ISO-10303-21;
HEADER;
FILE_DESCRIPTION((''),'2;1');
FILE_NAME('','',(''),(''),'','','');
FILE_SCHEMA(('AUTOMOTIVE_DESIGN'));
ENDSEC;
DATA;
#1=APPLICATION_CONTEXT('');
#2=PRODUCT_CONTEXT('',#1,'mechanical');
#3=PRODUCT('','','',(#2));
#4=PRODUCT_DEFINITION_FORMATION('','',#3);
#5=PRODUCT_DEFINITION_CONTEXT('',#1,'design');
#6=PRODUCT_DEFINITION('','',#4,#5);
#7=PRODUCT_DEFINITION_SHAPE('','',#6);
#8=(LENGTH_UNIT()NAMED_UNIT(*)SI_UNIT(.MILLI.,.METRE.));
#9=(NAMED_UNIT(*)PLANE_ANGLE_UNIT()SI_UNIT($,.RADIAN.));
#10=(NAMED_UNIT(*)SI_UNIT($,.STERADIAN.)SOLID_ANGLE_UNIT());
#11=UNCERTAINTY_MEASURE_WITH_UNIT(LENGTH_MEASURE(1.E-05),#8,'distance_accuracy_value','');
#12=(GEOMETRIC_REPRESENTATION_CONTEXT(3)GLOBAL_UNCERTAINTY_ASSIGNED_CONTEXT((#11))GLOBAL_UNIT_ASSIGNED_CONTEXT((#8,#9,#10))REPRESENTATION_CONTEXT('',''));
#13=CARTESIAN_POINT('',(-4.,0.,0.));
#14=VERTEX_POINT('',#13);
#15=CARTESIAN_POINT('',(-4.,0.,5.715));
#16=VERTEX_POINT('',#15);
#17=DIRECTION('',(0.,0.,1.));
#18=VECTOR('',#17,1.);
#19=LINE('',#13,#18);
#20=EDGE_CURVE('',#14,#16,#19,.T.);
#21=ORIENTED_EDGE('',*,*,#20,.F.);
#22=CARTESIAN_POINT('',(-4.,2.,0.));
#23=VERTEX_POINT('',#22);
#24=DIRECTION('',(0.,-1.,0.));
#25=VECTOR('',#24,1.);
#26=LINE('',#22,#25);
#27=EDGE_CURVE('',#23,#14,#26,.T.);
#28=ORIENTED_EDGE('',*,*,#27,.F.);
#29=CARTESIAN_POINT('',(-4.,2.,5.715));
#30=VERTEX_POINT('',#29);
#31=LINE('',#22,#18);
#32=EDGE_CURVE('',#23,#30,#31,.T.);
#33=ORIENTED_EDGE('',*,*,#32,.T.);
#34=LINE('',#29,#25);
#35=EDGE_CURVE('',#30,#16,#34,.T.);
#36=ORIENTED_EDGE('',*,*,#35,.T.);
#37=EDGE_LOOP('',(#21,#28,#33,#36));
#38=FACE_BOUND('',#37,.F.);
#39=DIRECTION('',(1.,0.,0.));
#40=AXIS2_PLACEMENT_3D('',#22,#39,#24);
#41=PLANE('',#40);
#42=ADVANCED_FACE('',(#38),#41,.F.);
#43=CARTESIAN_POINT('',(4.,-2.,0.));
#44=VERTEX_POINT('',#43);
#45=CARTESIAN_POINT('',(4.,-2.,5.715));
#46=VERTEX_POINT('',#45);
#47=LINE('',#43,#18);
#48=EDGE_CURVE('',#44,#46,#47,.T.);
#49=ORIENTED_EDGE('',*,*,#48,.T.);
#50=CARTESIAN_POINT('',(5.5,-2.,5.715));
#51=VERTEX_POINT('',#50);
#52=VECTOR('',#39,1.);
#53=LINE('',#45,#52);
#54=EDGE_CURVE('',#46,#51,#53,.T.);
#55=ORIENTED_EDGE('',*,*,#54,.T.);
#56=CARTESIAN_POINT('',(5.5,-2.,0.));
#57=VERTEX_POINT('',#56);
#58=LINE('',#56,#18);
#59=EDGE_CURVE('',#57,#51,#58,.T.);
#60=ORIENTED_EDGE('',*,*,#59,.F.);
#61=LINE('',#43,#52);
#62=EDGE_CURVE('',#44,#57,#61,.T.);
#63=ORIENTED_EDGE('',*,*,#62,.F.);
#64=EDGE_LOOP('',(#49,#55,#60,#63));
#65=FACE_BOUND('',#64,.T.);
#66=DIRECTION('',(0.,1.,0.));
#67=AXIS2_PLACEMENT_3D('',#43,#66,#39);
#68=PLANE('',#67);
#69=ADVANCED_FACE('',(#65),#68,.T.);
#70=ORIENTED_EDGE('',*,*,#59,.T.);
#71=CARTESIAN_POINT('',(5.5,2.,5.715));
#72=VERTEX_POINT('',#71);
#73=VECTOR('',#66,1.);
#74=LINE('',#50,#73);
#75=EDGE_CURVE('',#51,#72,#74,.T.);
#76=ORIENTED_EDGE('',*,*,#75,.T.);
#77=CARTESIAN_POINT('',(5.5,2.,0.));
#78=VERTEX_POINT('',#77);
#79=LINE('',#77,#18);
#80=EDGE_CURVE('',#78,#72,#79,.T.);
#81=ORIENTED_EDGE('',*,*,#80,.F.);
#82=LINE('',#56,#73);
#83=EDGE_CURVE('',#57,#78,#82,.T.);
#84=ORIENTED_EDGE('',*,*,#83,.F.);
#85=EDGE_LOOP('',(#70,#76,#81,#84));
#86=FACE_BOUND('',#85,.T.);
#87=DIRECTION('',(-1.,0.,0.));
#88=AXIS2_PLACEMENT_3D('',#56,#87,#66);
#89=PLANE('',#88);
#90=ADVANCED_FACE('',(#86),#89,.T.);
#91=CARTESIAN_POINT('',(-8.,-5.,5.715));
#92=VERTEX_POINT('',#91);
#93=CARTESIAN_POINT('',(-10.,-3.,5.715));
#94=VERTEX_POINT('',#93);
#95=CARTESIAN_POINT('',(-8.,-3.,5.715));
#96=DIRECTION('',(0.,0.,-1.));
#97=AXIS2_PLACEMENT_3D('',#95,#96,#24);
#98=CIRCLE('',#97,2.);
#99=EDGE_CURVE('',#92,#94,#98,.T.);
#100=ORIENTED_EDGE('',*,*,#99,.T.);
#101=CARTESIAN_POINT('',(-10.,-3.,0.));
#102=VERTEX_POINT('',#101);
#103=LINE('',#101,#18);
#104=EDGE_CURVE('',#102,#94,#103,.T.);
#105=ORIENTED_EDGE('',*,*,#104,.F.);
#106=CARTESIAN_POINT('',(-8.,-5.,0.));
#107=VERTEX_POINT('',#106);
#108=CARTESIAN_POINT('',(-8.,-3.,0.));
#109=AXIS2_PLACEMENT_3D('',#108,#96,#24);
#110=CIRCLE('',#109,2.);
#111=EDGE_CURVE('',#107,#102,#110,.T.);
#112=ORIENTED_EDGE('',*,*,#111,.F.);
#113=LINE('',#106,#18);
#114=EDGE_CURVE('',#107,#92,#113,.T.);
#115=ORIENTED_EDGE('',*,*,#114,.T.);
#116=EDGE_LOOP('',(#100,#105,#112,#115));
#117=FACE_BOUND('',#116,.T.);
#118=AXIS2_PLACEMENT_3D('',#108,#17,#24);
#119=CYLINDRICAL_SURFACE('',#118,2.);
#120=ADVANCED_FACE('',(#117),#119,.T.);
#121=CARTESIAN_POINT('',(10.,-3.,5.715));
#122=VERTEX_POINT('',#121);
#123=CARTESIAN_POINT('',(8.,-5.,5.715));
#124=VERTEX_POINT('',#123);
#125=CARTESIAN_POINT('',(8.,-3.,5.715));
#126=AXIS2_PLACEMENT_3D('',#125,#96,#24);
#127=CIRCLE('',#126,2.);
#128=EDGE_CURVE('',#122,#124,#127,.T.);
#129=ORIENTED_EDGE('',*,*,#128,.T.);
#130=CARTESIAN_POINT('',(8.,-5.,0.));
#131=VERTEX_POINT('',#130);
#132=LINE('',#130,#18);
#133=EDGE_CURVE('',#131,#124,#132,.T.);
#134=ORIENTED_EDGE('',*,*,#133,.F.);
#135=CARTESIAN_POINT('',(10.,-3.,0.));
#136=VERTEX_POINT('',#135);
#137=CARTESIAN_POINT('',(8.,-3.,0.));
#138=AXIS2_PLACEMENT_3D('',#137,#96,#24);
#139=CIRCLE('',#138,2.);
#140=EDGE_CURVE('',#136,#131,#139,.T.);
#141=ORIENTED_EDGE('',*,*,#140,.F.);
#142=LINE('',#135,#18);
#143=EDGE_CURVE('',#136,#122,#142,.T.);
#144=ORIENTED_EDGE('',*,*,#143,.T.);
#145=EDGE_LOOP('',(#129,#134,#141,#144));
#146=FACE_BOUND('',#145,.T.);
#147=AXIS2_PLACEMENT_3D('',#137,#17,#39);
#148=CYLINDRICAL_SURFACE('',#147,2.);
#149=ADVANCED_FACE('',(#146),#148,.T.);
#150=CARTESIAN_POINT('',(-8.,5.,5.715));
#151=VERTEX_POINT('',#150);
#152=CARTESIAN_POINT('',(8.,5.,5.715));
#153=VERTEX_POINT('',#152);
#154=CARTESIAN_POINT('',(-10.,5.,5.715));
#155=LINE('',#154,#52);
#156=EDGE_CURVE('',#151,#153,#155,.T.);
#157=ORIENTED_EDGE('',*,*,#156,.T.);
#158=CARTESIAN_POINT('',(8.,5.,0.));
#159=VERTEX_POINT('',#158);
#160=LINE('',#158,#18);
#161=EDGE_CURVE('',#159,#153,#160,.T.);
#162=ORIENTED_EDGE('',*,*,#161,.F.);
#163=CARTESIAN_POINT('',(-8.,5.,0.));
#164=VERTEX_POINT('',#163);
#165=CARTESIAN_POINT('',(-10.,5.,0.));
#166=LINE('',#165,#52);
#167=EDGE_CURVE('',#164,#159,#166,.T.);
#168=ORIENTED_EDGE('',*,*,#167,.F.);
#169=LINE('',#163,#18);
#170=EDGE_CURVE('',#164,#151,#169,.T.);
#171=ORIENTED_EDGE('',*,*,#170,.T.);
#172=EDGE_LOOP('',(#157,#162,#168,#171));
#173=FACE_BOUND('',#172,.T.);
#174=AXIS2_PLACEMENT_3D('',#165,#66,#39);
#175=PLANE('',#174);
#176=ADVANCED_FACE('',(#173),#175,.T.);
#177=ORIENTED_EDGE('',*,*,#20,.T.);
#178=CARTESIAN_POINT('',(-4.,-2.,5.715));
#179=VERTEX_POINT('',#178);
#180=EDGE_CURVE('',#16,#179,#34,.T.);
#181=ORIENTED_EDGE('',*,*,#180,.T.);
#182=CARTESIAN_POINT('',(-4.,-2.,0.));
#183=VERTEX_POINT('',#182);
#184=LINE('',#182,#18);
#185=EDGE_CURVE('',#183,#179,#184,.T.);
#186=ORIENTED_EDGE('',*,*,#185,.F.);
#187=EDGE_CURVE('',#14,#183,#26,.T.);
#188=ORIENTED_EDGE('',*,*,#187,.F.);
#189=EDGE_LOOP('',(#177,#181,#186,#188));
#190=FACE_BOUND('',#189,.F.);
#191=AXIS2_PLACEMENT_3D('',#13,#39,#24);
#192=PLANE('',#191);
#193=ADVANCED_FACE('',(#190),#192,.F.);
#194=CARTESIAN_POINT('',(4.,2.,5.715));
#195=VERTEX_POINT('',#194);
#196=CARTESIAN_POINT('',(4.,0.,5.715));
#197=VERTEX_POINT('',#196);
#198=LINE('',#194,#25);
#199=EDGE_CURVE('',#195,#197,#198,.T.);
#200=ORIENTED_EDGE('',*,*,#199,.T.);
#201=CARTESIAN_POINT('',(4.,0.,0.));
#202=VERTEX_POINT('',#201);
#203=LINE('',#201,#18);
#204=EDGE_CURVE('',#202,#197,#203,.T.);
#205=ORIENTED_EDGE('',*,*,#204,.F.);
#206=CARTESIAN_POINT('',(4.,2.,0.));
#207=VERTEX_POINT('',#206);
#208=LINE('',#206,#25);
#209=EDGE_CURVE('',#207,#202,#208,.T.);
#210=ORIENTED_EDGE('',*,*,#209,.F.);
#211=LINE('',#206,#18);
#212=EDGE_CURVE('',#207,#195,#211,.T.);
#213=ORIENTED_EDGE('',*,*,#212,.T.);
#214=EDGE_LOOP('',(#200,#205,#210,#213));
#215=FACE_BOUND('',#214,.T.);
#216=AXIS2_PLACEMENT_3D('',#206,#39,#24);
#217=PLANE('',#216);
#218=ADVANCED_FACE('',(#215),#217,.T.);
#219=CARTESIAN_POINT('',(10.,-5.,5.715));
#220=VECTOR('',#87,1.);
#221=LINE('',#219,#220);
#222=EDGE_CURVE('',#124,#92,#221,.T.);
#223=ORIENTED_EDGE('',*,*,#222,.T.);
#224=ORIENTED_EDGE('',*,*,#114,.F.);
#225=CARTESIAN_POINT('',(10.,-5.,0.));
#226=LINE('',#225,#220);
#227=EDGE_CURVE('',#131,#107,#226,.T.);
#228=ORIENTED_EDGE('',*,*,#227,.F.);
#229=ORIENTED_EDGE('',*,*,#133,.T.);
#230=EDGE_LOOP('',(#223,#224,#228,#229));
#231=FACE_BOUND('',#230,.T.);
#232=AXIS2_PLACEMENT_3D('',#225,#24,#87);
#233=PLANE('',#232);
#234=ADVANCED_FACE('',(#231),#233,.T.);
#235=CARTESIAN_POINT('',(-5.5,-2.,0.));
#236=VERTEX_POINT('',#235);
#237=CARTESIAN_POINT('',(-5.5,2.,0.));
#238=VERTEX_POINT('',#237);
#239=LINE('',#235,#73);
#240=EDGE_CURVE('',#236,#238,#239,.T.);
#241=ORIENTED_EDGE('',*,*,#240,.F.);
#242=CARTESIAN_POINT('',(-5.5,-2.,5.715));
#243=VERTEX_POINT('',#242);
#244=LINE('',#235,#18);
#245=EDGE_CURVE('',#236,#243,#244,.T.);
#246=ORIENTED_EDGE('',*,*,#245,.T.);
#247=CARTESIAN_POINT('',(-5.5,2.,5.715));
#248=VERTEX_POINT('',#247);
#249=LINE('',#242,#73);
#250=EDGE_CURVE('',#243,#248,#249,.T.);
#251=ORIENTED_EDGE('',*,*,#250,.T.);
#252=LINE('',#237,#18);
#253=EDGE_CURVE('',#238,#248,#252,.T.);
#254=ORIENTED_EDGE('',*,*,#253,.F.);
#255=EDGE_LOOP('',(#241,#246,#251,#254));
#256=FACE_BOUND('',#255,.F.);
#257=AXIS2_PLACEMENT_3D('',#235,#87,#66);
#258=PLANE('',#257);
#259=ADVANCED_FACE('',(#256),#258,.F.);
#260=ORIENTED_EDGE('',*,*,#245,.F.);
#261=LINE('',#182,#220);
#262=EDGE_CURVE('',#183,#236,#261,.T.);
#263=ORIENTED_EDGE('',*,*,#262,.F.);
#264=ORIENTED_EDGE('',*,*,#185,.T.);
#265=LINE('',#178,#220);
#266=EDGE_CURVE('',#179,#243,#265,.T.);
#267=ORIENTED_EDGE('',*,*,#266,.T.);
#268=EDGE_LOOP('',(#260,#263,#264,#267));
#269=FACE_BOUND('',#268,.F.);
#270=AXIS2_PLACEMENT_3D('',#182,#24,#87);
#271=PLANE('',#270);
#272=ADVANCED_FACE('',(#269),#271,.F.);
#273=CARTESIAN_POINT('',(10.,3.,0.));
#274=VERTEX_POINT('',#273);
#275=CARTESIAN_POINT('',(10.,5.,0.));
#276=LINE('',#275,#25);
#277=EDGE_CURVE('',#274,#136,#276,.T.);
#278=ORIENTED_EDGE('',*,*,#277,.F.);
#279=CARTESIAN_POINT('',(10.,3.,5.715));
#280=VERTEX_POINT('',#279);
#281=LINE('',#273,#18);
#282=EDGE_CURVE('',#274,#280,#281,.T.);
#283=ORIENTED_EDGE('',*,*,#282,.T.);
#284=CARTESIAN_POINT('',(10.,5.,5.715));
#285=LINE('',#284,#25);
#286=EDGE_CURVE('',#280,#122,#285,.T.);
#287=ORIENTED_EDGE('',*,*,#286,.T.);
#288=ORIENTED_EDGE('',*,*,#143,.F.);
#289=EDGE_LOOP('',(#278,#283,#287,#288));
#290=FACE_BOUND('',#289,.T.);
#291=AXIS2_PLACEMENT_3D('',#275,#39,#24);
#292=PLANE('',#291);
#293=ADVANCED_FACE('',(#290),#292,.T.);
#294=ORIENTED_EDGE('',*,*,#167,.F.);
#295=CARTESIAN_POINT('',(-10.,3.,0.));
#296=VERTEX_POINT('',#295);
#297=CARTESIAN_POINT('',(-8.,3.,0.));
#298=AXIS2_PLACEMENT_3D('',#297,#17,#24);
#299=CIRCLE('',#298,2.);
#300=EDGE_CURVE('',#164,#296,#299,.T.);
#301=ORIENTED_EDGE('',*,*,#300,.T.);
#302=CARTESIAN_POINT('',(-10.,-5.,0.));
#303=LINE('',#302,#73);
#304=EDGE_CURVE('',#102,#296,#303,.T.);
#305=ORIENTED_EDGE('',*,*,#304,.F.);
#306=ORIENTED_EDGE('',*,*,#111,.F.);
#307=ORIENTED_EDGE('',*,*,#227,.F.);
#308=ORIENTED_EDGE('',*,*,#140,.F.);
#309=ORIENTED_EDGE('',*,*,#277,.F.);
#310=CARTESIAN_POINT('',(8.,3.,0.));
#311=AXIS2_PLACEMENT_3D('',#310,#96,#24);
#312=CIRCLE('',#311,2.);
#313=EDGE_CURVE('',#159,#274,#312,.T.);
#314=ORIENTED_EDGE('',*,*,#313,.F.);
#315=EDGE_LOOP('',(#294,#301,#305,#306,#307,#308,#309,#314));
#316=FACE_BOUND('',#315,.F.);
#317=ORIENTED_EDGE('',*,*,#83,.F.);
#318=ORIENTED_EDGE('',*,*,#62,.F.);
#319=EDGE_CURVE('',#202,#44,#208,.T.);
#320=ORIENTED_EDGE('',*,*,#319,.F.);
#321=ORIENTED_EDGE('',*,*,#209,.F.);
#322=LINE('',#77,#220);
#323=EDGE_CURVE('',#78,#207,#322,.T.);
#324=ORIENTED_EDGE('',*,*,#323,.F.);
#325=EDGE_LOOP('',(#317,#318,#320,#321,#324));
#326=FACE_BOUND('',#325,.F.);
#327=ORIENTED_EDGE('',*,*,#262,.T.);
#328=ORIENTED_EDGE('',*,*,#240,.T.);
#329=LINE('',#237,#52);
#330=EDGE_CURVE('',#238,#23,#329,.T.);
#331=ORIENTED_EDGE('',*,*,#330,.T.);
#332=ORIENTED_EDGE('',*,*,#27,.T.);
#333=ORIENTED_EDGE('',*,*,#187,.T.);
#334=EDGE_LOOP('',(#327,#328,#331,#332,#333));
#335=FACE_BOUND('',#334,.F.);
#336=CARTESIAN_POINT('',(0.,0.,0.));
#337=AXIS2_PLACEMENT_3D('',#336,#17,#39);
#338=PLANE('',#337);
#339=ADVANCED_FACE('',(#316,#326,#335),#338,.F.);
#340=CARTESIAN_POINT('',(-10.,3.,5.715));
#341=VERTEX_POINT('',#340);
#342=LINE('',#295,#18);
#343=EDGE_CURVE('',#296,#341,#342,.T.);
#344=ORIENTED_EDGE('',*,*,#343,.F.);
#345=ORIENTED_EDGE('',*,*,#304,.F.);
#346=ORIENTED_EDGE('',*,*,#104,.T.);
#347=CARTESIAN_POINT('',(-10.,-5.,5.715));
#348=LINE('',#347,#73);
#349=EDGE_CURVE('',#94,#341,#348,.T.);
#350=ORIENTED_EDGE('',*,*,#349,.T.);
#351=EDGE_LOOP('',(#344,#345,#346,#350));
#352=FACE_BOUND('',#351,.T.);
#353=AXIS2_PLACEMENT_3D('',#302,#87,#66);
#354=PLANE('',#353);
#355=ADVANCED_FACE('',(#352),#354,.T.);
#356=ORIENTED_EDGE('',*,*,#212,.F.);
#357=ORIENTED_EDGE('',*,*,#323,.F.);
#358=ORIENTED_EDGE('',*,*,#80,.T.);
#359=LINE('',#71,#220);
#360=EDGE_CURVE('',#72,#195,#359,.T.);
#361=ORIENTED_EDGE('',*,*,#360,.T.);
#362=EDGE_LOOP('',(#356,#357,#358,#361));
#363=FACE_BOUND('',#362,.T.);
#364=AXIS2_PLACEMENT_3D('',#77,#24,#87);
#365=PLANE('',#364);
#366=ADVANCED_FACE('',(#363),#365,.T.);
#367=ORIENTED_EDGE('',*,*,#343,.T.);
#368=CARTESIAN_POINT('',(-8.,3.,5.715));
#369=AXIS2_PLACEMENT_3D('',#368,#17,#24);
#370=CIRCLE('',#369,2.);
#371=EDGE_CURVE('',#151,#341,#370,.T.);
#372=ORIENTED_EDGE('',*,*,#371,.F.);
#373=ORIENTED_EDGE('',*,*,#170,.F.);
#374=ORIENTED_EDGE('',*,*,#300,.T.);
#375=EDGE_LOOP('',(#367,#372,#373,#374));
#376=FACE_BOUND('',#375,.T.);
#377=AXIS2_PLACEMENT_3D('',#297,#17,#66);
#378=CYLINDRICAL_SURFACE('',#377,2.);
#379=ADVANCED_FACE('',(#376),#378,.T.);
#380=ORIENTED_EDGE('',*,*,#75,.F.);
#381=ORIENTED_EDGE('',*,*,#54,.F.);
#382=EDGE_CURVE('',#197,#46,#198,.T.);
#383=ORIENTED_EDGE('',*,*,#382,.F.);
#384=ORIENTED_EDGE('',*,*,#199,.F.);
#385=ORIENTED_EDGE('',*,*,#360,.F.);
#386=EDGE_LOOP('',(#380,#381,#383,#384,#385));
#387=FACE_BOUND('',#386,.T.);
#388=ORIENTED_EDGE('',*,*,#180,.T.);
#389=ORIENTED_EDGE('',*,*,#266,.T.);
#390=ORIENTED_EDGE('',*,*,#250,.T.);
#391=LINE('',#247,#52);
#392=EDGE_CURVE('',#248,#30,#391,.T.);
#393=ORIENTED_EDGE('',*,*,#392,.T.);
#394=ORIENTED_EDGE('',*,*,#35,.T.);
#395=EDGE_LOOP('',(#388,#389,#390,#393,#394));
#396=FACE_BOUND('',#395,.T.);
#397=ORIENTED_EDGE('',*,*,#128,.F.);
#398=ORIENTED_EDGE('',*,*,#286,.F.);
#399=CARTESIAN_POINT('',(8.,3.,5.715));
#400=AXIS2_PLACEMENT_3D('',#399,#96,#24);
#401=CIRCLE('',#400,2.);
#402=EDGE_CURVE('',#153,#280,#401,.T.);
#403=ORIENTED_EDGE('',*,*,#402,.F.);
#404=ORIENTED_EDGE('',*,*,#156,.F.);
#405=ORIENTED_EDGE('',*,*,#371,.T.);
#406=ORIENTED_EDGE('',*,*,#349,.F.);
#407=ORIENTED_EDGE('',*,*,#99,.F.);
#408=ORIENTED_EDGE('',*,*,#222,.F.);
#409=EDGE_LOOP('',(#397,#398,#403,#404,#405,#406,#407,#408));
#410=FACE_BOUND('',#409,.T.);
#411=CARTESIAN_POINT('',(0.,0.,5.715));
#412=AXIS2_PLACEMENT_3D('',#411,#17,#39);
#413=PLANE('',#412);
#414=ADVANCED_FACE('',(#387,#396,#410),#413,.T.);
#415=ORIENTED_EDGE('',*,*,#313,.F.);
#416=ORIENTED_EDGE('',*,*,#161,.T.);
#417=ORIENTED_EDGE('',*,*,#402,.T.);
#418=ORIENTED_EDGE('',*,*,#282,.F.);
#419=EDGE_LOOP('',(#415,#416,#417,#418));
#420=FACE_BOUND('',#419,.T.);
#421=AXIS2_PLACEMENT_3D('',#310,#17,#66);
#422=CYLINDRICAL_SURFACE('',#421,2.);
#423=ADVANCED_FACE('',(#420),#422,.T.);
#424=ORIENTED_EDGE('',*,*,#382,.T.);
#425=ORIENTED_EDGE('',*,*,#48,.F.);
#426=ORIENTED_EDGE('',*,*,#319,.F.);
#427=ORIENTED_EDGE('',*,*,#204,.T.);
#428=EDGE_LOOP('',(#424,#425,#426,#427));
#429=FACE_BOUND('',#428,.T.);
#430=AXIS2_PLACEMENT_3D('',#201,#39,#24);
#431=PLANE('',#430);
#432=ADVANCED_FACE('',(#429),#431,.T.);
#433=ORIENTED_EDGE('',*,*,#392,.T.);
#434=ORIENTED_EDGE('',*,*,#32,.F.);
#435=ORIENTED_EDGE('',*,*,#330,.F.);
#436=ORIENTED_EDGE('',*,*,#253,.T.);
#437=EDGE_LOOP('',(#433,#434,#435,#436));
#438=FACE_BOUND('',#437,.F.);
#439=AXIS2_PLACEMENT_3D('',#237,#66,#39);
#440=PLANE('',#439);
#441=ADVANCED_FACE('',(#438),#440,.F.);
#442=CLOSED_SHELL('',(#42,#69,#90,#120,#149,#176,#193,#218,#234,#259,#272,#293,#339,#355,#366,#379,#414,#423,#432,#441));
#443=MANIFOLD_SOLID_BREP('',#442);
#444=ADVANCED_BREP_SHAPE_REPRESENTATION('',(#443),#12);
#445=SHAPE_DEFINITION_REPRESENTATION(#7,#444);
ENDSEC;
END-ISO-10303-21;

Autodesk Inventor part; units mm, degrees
ref_plane "YZ Plane" through (0, 0, 0) normal (1, 0, 0) x (0, 1, 0)
ref_plane "XZ Plane" through (0, 0, 0) normal (0, 1, 0) x (-1, 0, 0)
ref_plane "XY Plane" through (0, 0, 0) normal (0, 0, 1) x (1, 0, 0)
sketch "Sketch1" plane through (0, 0, 0) normal (0, 0, 1) x (1, 0, 0)
  line L0 (-10, 5) -> (10, 5)
  line L1 (10, 5) -> (10, -5)
  line L2 (10, -5) -> (-10, -5)
  line L3 (-10, -5) -> (-10, 5)
  line L4 (-5.5, 2) -> (-4, 2)
  line L5 (-4, 2) -> (-4, -2)
  line L6 (-4, -2) -> (-5.5, -2)
  line L7 (-5.5, -2) -> (-5.5, 2)
  line L8 (5.5, 2) -> (4, 2)
  line L9 (4, 2) -> (4, -2)
  line L10 (4, -2) -> (5.5, -2)
  line L11 (5.5, -2) -> (5.5, 2)
  line L12 (-4, 0) -> (4, 0)
  point P0 (0, 0)
  point P1 (-10, 0)
  point P2 (0, 5)
  point P3 (0, 0)
  dimension "d0" = 20
  dimension "d2" = 10
  dimension "d3" = 8
  dimension "d4" = 1.5
  dimension "d5" = 4
extrude "Extrusion1" add sketch "Sketch1" along normal blind 5.715
fillet "Fillet1" radius 2 4 edges at (-10, 5, 2.8575) (10, 5, 2.8575) (10, -5, 2.8575) (-10, -5, 2.8575)
properties part number "RETAINER"
